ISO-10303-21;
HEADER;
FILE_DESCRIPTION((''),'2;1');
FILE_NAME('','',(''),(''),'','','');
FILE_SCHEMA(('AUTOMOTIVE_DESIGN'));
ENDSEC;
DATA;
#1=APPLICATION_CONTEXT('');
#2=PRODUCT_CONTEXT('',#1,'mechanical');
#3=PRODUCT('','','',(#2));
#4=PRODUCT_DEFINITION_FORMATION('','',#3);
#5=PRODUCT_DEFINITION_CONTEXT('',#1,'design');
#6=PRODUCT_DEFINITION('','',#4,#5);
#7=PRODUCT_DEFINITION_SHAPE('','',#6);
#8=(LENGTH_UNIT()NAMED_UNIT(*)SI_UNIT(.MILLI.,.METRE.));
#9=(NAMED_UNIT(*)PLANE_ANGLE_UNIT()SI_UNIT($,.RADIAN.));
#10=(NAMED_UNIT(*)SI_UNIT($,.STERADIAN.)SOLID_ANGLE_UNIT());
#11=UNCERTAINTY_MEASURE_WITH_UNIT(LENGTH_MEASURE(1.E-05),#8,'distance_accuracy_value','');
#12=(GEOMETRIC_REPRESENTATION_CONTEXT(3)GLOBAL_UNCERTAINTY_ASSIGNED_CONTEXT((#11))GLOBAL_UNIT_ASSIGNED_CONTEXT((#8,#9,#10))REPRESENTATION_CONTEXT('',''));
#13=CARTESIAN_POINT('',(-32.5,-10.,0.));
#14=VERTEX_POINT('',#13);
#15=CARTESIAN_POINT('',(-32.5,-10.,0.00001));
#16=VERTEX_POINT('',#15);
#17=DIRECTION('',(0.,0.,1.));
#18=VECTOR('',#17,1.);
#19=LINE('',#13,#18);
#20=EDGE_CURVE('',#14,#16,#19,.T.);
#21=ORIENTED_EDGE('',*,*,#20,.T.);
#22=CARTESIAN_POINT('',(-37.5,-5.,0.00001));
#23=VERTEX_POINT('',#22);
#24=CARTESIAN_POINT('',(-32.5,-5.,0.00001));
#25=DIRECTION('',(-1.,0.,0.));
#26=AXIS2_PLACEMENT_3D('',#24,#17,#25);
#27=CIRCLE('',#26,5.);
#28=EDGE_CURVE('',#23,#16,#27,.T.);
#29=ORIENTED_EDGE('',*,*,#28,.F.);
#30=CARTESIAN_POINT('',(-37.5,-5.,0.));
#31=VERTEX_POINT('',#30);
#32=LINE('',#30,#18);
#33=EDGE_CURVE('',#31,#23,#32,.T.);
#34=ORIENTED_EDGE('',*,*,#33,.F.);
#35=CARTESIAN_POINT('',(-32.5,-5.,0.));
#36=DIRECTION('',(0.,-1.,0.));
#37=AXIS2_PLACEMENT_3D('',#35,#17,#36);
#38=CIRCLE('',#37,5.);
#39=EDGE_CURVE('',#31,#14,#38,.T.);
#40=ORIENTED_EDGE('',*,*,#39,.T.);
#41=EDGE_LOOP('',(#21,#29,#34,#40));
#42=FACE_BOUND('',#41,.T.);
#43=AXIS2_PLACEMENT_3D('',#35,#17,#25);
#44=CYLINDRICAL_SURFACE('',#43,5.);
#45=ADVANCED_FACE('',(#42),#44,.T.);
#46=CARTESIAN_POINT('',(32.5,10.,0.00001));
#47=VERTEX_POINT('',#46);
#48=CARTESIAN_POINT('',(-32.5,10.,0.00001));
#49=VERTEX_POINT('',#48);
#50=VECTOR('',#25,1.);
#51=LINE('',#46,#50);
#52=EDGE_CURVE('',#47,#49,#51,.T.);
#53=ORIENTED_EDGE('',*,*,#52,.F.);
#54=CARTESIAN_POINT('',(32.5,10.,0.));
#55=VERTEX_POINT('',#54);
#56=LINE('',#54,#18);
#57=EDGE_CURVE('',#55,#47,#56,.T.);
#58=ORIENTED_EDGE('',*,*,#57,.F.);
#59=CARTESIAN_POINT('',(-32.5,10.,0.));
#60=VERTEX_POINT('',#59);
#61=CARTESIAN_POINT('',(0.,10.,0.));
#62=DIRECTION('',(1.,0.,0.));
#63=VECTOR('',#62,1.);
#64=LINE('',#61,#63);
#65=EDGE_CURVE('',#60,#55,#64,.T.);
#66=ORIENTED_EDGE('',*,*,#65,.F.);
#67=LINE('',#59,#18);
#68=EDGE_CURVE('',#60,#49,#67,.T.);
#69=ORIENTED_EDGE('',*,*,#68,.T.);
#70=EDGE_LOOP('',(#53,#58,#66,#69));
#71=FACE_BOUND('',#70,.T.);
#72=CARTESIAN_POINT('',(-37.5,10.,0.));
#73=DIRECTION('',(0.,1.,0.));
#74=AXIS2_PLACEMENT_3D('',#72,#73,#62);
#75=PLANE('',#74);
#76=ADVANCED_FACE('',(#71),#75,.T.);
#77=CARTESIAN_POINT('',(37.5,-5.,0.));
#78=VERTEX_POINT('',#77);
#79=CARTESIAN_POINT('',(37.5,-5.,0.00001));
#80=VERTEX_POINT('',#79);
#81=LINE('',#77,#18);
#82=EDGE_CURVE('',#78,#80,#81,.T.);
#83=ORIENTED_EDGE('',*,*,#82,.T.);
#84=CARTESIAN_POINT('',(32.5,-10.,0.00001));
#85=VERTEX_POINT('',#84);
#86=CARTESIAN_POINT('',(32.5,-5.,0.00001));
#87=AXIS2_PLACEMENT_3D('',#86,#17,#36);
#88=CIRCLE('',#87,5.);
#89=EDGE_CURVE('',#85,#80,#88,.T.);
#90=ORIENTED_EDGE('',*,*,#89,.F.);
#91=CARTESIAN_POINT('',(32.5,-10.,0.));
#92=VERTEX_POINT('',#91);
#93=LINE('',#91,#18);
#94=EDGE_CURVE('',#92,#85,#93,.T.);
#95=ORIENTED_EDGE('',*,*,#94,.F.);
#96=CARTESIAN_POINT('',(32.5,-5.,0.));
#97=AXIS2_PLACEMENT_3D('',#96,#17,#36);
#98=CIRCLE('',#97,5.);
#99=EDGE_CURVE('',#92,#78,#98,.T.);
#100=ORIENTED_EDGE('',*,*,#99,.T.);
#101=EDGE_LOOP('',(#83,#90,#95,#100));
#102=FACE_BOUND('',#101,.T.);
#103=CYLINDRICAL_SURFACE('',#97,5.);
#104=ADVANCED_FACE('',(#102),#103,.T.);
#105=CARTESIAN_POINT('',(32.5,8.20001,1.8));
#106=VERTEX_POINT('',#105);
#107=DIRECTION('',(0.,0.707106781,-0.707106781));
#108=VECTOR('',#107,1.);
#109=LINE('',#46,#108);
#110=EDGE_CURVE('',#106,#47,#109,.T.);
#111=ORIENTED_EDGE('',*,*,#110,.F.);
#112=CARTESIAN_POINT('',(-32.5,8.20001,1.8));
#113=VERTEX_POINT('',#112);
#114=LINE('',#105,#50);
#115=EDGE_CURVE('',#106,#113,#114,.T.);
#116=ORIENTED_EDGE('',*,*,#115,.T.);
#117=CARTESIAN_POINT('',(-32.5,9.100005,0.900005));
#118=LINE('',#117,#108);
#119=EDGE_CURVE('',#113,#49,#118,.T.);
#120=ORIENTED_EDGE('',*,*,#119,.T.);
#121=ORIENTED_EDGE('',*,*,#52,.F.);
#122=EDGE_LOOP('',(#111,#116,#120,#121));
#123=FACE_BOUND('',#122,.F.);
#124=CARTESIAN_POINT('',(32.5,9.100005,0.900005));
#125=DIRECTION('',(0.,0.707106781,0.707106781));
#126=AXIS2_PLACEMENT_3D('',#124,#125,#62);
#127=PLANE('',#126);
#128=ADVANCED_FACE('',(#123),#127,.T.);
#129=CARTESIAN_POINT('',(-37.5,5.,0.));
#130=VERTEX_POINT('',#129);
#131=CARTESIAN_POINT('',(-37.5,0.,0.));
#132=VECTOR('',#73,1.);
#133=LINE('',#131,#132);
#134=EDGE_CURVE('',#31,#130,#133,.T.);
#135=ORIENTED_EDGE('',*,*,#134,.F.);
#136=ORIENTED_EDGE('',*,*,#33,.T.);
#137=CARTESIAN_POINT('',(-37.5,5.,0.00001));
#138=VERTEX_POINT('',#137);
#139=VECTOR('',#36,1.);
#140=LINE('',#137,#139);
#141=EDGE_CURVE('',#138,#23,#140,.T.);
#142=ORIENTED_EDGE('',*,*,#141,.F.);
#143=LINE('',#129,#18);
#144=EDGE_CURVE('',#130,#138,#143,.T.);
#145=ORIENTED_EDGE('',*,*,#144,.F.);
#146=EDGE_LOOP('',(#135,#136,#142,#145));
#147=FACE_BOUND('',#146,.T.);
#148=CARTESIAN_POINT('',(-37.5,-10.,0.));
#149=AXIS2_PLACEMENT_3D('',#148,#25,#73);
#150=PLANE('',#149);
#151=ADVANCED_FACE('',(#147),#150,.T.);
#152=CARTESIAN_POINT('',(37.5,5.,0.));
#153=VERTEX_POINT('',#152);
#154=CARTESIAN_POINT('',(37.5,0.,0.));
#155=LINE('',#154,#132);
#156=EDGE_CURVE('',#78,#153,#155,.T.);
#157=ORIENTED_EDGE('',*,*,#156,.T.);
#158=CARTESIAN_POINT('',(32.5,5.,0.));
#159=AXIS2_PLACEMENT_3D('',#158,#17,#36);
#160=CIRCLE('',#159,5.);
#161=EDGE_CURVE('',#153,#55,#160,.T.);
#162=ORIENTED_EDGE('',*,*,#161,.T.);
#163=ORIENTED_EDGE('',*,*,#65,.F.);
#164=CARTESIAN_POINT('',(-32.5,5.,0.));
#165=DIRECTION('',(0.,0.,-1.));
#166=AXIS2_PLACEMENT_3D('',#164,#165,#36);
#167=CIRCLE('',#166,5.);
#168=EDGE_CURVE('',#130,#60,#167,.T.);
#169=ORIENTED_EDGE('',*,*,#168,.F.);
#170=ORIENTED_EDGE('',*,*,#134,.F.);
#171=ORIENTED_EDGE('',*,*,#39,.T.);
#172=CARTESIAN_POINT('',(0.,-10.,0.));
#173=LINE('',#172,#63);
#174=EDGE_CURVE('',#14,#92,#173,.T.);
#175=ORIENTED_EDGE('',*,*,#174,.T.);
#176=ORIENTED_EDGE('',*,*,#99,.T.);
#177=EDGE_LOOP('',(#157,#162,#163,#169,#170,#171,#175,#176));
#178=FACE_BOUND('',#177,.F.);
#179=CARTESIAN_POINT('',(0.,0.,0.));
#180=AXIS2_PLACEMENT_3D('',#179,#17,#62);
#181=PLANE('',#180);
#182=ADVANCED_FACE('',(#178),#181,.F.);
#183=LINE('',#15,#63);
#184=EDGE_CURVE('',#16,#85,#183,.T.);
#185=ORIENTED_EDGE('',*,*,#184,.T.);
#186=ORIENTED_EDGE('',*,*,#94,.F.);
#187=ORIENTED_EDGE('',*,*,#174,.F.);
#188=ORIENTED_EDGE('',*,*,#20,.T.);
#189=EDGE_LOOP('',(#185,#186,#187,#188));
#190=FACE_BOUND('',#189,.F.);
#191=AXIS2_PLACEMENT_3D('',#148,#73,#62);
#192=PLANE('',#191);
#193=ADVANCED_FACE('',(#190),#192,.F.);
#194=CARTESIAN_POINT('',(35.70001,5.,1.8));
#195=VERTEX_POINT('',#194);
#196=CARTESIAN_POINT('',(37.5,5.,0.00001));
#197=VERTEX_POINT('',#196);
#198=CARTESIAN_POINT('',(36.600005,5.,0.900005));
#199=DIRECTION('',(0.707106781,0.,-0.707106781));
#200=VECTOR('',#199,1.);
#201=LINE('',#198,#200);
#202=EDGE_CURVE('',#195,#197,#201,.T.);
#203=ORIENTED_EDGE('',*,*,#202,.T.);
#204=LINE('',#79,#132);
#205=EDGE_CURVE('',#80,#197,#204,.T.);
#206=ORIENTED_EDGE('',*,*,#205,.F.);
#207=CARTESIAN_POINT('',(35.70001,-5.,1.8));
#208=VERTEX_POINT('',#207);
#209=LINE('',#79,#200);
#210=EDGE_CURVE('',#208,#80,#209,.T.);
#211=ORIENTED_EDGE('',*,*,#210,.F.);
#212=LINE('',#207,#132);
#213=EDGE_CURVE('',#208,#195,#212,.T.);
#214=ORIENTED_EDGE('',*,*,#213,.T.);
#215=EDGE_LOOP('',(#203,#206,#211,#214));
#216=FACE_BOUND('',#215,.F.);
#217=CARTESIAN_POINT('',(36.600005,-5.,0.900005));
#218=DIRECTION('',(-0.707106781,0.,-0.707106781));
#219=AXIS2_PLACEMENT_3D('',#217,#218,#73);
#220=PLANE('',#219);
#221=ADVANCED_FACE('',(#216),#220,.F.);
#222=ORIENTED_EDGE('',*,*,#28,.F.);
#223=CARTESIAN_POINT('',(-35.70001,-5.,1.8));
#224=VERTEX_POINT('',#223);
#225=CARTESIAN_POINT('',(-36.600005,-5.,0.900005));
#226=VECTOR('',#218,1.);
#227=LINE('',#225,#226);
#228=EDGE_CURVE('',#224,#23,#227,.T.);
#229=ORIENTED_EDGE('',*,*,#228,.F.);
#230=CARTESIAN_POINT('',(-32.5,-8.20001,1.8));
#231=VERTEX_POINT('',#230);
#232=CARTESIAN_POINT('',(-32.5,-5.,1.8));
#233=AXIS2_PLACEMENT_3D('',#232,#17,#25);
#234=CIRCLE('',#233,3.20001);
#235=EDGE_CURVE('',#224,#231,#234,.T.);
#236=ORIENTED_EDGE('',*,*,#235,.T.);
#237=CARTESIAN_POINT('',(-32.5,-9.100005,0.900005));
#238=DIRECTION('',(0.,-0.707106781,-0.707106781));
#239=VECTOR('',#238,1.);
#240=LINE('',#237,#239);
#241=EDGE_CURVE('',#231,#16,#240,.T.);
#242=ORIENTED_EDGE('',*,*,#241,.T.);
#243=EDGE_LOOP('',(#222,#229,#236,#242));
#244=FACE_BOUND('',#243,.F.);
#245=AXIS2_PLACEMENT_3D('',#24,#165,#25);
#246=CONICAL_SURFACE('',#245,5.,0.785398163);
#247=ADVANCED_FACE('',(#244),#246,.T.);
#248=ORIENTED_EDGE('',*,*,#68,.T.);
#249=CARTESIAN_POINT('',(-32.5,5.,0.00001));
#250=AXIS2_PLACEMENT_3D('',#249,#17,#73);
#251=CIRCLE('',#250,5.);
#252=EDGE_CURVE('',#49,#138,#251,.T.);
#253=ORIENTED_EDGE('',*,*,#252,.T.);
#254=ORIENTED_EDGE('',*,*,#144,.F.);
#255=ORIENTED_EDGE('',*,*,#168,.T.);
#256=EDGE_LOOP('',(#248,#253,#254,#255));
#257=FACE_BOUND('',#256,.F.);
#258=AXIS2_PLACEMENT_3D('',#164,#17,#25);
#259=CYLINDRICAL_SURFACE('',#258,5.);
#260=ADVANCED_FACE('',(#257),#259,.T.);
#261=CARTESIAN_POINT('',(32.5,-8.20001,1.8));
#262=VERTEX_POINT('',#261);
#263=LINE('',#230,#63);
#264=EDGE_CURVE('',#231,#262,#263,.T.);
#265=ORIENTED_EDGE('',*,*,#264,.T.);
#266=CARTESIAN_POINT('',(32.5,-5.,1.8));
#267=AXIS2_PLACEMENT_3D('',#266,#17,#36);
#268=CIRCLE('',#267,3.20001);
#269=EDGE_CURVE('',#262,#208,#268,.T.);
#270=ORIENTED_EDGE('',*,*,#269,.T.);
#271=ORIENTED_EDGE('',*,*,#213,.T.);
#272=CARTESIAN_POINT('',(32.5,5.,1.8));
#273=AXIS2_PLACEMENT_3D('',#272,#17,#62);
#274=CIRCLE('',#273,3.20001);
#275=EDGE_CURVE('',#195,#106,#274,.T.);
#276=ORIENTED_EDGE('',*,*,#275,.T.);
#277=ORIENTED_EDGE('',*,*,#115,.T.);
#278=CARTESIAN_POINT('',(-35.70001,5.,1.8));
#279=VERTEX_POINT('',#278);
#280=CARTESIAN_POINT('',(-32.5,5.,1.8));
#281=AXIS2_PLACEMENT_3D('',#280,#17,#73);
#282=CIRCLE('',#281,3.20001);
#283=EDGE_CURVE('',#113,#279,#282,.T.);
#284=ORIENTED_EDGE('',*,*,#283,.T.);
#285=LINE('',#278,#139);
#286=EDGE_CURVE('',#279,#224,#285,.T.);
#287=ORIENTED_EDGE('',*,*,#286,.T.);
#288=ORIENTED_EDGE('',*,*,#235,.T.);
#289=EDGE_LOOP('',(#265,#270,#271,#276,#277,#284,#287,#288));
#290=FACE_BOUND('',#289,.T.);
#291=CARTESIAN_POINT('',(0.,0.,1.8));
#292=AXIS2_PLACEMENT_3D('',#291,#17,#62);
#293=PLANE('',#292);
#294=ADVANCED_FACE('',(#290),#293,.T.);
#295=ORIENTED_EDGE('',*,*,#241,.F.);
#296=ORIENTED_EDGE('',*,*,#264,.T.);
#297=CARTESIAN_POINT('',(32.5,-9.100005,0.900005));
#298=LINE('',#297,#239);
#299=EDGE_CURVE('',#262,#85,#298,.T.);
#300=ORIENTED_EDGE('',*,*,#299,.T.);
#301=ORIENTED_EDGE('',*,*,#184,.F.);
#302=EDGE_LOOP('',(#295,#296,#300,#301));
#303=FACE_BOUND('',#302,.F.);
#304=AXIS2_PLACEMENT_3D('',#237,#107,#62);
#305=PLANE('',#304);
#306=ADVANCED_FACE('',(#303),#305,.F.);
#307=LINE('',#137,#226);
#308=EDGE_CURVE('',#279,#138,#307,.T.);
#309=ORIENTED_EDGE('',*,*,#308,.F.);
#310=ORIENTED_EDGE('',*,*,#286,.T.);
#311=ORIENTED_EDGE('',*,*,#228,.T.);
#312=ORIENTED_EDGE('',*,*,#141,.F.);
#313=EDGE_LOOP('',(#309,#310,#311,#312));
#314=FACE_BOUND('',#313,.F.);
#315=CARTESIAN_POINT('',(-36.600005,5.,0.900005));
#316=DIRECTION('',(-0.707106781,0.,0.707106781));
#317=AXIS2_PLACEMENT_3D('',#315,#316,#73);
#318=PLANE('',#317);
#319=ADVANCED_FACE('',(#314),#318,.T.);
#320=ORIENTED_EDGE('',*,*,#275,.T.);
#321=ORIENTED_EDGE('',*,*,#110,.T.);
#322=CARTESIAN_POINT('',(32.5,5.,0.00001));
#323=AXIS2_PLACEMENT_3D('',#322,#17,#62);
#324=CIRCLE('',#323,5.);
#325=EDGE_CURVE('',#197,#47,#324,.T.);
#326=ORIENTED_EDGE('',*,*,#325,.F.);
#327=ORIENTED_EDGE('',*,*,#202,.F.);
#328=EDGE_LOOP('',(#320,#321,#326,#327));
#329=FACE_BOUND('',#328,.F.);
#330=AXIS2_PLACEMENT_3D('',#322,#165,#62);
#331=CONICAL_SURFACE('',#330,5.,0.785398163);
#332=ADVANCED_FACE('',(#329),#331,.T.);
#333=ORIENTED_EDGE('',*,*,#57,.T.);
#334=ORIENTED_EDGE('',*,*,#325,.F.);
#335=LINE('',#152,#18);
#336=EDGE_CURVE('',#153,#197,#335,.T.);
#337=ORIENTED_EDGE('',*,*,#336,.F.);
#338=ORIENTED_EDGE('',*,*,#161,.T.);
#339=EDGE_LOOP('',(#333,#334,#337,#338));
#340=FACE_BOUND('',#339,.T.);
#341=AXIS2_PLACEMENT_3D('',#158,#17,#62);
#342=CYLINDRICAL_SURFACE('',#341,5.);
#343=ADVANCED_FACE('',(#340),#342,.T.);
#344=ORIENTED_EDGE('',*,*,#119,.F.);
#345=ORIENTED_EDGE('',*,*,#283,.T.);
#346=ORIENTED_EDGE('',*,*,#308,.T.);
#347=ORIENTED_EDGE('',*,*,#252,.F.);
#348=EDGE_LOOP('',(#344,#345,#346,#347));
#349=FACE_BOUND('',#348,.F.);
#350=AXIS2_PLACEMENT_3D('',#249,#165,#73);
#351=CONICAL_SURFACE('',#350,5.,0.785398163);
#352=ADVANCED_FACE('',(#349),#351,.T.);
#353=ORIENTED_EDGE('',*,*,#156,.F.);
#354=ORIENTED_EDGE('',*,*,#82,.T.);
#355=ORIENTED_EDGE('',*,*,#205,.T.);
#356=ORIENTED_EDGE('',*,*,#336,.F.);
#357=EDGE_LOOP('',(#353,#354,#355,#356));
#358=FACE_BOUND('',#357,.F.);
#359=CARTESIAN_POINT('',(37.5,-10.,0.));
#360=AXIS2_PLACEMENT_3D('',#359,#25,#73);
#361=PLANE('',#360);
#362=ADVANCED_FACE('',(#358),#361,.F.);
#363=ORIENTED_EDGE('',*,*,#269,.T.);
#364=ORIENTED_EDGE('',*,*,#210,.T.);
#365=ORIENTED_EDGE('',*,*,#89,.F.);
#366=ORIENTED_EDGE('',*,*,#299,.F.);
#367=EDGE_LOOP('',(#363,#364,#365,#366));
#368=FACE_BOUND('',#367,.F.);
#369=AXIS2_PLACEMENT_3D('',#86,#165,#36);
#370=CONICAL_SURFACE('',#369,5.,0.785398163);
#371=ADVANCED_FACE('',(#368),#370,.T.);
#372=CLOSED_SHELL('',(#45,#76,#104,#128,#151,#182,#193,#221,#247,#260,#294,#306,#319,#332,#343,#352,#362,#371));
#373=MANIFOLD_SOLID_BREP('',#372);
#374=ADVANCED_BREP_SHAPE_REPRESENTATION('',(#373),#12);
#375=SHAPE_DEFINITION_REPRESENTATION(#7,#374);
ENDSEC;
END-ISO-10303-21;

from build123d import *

# Parameters (mm, degrees)
F0_W     = 75
F0_H     = 20
F1_DEPTH = 1.8
F2_R     = 5
F3_SIZE  = 1.79999


# Not quite as in the source:
# - a fillet or chamfer is up to 0.001 mm smaller than in the source, because OpenCascade refuses the exact size


with BuildPart() as f1:
    # F0 (on Top) → F1 (new body)
    with BuildSketch(Plane.XY):
        Rectangle(F0_W, F0_H)
    extrude(amount=F1_DEPTH)

    # F2
    f2_edges = [f1.edges().sort_by_distance(p)[0] for p in [
        (-37.5, -10, 0.9),
        (-37.5, 10, 0.9),
        (37.5, -10, 0.9),
        (37.5, 10, 0.9),
    ]]
    fillet(f2_edges, radius=F2_R)

    # F3 (size 1.8 in the source; OpenCascade refuses exactly that, so slightly less here)
    f3_edges = [f1.edges().sort_by_distance(p)[0] for p in [
        (0, -10, 1.8),
        (-36.035534, -8.535534, 1.8),
        (36.035534, -8.535534, 1.8),
        (-37.5, 0, 1.8),
        (37.5, 0, 1.8),
        (-36.035534, 8.535534, 1.8),
        (36.035534, 8.535534, 1.8),
        (0, 10, 1.8),
    ]]
    chamfer(f3_edges, length=F3_SIZE)


solid = f1.part
